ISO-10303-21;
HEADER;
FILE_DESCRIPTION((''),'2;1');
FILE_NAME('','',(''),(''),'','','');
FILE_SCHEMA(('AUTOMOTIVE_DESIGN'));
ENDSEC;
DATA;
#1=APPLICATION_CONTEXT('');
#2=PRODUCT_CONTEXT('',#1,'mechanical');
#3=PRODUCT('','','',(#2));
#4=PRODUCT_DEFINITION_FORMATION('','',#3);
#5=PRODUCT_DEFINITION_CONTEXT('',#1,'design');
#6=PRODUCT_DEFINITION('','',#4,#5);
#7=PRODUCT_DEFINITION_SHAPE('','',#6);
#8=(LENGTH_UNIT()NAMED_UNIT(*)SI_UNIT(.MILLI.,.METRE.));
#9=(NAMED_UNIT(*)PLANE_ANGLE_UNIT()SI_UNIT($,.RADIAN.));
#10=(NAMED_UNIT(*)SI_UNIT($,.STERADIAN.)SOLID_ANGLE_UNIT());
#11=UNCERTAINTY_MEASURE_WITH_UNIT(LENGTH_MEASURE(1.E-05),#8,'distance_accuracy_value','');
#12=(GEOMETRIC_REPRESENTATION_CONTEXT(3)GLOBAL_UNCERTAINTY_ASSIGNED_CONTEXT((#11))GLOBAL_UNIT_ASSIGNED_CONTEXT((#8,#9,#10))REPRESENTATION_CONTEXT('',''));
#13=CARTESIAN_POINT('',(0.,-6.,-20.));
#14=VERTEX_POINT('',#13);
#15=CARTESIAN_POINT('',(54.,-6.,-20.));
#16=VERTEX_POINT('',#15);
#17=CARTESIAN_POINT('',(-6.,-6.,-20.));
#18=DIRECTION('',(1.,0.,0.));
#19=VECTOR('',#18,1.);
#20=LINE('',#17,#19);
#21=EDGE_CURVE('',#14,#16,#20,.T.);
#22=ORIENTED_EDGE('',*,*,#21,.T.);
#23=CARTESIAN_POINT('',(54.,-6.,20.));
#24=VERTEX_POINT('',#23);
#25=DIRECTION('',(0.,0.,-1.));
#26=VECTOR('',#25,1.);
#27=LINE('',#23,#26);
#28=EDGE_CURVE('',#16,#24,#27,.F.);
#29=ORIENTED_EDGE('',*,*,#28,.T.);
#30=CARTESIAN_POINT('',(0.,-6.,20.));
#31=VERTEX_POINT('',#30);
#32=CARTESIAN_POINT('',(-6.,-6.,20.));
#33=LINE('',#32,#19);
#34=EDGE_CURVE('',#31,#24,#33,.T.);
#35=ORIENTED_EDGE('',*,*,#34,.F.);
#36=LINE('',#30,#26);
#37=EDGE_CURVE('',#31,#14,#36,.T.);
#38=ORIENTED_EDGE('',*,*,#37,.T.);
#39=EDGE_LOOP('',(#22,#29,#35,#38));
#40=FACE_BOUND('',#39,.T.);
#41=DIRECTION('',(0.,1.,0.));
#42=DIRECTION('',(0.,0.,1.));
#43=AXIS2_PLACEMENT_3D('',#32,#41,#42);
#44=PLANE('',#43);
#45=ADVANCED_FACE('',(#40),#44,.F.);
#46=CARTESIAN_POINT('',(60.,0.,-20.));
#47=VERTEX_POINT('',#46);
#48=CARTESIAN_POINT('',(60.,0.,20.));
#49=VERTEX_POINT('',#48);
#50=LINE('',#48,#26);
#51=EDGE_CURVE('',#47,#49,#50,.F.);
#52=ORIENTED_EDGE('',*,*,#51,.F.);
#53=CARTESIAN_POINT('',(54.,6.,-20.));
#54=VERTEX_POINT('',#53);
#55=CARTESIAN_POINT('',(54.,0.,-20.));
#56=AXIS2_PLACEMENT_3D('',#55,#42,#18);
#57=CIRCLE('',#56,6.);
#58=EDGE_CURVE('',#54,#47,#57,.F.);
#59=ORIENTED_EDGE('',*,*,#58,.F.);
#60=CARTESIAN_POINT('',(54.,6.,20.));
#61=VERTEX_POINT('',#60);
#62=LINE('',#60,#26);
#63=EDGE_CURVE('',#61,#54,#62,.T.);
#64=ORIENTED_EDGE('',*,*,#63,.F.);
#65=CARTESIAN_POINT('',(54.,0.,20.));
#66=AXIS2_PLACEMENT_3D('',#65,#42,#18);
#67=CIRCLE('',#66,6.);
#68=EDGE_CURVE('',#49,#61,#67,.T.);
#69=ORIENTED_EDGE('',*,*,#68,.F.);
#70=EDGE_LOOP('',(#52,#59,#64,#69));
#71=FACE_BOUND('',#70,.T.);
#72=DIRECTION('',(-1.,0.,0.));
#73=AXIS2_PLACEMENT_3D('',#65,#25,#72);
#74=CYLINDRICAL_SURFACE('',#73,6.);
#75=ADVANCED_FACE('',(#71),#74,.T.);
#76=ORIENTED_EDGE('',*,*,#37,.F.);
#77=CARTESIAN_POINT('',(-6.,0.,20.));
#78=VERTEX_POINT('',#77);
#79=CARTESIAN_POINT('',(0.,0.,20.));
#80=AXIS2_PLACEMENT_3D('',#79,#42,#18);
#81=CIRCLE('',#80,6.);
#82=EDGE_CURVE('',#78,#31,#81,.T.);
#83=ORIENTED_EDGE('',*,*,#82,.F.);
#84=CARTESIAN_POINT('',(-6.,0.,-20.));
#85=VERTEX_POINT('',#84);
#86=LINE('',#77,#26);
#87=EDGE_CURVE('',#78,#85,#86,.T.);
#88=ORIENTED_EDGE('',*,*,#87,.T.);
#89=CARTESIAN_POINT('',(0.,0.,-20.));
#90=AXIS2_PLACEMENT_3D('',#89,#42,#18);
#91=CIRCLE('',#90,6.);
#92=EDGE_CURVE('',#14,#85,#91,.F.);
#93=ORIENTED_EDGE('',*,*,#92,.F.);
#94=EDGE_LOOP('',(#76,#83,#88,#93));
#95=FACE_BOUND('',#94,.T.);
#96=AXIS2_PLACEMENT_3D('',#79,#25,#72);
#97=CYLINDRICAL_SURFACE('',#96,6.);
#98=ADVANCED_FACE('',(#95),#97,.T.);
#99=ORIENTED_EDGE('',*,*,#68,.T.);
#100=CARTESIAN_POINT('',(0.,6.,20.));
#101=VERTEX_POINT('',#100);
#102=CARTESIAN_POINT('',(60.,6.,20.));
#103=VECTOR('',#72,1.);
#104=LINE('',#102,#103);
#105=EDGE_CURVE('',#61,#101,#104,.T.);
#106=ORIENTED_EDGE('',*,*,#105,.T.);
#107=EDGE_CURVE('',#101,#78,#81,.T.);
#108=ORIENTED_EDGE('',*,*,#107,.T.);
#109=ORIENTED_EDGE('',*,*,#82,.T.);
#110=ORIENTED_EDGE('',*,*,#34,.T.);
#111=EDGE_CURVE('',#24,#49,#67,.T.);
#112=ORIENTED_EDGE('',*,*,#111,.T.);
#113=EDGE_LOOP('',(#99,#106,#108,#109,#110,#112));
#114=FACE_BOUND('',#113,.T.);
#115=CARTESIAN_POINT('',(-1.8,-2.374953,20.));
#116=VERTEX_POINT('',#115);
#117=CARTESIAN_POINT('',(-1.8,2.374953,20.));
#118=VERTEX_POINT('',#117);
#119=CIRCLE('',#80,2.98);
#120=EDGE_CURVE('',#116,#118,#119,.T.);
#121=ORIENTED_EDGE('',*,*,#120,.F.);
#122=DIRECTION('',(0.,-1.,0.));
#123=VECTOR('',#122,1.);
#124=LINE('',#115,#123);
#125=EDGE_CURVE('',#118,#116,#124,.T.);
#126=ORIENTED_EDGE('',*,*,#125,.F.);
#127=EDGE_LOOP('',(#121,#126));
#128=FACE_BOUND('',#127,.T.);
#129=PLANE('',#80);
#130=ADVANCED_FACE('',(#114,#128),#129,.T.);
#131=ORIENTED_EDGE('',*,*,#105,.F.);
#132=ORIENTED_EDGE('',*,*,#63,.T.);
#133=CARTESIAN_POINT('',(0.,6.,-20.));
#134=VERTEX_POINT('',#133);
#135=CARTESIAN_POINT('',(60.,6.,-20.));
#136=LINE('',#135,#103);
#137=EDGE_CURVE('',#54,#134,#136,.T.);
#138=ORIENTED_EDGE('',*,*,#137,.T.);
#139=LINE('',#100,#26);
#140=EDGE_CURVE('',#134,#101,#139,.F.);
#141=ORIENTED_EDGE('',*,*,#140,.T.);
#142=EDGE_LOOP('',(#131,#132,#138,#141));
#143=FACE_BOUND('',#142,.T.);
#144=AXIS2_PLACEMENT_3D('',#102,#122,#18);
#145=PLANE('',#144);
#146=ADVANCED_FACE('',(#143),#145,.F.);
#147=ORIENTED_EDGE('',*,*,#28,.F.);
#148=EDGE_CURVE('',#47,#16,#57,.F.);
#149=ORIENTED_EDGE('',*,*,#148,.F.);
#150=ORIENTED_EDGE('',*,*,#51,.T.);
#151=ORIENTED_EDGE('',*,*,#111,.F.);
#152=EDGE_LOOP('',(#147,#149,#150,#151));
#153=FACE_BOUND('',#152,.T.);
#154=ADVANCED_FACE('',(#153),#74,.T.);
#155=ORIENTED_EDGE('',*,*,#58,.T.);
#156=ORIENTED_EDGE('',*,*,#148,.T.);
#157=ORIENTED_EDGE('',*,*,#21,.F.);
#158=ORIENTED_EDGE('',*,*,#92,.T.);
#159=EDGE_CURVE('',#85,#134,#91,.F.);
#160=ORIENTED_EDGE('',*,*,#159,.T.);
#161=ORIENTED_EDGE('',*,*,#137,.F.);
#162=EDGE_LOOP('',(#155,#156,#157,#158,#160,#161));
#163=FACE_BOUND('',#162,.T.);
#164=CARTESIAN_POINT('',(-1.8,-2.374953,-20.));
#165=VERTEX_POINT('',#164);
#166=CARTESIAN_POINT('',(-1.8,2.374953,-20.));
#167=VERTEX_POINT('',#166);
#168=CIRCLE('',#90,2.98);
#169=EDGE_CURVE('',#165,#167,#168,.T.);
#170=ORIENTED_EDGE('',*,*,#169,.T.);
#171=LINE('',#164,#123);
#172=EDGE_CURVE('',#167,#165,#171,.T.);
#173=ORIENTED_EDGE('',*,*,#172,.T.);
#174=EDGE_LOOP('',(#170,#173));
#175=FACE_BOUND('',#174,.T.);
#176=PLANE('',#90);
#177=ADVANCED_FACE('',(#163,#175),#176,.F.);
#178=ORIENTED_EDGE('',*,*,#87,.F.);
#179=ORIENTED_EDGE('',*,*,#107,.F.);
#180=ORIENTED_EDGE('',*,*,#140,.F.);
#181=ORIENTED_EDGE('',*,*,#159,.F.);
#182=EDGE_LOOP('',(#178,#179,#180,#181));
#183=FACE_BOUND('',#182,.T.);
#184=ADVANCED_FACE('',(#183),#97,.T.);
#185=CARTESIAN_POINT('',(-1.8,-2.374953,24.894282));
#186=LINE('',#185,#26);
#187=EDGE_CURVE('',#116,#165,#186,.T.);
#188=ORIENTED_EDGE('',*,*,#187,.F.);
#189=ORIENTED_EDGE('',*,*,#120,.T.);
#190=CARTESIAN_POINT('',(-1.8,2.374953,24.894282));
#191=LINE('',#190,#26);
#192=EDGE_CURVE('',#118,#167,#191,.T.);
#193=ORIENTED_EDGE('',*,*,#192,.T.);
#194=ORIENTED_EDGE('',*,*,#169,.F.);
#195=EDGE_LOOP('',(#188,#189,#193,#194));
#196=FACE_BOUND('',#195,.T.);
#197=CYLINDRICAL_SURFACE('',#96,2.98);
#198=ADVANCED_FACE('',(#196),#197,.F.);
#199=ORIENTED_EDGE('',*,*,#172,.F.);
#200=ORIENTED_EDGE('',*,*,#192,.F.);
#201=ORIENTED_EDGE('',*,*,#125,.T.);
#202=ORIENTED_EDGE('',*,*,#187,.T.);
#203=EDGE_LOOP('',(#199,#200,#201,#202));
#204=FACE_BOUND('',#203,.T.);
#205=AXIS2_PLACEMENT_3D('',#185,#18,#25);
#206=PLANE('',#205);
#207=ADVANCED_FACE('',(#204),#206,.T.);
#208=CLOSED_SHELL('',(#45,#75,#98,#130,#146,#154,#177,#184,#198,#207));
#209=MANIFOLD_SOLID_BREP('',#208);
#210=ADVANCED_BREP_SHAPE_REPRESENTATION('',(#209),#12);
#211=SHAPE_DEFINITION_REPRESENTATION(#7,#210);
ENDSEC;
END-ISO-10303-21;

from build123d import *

# Parameters (mm, degrees)
SKETCH1_W           = 66
SKETCH1_H           = 12
SKETCH1_R           = 2.98
BOSS_EXTRUDE1_DEPTH = 20
FILLET2_R           = 6
BOSS_EXTRUDE2_DEPTH = 40


with BuildPart() as part:
    # Sketch1 → Boss-Extrude1 (new, symmetric)
    with BuildSketch(Plane.XY):
        with Locations((27, 0)):
            Rectangle(SKETCH1_W, SKETCH1_H)
        Circle(SKETCH1_R, mode=Mode.SUBTRACT)
    extrude(amount=BOSS_EXTRUDE1_DEPTH, both=True)

    # Fillet2
    fillet2_edges = [part.edges().sort_by_distance(p)[0] for p in [
        (60, -6, 0),
        (60, 6, 0),
        (-6, -6, 0),
        (-6, 6, 0),
    ]]
    fillet(fillet2_edges, radius=FILLET2_R - 0.0001)  # a hair under: the kernel refuses the full size

    # Sketch2 → Boss-Extrude2 (add)
    with BuildSketch(Plane(origin=(0, 0, -20), x_dir=(-1, 0, 0), z_dir=(0, 0, -1))):
        with BuildLine():
            Line((1.8, -2.374952631), (1.8, 2.374952631))
            ThreePointArc((1.8, 2.374952631), (2.98, 0), (1.8, -2.374952631))
        make_face()
    extrude(amount=-BOSS_EXTRUDE2_DEPTH)


solid = part.part
